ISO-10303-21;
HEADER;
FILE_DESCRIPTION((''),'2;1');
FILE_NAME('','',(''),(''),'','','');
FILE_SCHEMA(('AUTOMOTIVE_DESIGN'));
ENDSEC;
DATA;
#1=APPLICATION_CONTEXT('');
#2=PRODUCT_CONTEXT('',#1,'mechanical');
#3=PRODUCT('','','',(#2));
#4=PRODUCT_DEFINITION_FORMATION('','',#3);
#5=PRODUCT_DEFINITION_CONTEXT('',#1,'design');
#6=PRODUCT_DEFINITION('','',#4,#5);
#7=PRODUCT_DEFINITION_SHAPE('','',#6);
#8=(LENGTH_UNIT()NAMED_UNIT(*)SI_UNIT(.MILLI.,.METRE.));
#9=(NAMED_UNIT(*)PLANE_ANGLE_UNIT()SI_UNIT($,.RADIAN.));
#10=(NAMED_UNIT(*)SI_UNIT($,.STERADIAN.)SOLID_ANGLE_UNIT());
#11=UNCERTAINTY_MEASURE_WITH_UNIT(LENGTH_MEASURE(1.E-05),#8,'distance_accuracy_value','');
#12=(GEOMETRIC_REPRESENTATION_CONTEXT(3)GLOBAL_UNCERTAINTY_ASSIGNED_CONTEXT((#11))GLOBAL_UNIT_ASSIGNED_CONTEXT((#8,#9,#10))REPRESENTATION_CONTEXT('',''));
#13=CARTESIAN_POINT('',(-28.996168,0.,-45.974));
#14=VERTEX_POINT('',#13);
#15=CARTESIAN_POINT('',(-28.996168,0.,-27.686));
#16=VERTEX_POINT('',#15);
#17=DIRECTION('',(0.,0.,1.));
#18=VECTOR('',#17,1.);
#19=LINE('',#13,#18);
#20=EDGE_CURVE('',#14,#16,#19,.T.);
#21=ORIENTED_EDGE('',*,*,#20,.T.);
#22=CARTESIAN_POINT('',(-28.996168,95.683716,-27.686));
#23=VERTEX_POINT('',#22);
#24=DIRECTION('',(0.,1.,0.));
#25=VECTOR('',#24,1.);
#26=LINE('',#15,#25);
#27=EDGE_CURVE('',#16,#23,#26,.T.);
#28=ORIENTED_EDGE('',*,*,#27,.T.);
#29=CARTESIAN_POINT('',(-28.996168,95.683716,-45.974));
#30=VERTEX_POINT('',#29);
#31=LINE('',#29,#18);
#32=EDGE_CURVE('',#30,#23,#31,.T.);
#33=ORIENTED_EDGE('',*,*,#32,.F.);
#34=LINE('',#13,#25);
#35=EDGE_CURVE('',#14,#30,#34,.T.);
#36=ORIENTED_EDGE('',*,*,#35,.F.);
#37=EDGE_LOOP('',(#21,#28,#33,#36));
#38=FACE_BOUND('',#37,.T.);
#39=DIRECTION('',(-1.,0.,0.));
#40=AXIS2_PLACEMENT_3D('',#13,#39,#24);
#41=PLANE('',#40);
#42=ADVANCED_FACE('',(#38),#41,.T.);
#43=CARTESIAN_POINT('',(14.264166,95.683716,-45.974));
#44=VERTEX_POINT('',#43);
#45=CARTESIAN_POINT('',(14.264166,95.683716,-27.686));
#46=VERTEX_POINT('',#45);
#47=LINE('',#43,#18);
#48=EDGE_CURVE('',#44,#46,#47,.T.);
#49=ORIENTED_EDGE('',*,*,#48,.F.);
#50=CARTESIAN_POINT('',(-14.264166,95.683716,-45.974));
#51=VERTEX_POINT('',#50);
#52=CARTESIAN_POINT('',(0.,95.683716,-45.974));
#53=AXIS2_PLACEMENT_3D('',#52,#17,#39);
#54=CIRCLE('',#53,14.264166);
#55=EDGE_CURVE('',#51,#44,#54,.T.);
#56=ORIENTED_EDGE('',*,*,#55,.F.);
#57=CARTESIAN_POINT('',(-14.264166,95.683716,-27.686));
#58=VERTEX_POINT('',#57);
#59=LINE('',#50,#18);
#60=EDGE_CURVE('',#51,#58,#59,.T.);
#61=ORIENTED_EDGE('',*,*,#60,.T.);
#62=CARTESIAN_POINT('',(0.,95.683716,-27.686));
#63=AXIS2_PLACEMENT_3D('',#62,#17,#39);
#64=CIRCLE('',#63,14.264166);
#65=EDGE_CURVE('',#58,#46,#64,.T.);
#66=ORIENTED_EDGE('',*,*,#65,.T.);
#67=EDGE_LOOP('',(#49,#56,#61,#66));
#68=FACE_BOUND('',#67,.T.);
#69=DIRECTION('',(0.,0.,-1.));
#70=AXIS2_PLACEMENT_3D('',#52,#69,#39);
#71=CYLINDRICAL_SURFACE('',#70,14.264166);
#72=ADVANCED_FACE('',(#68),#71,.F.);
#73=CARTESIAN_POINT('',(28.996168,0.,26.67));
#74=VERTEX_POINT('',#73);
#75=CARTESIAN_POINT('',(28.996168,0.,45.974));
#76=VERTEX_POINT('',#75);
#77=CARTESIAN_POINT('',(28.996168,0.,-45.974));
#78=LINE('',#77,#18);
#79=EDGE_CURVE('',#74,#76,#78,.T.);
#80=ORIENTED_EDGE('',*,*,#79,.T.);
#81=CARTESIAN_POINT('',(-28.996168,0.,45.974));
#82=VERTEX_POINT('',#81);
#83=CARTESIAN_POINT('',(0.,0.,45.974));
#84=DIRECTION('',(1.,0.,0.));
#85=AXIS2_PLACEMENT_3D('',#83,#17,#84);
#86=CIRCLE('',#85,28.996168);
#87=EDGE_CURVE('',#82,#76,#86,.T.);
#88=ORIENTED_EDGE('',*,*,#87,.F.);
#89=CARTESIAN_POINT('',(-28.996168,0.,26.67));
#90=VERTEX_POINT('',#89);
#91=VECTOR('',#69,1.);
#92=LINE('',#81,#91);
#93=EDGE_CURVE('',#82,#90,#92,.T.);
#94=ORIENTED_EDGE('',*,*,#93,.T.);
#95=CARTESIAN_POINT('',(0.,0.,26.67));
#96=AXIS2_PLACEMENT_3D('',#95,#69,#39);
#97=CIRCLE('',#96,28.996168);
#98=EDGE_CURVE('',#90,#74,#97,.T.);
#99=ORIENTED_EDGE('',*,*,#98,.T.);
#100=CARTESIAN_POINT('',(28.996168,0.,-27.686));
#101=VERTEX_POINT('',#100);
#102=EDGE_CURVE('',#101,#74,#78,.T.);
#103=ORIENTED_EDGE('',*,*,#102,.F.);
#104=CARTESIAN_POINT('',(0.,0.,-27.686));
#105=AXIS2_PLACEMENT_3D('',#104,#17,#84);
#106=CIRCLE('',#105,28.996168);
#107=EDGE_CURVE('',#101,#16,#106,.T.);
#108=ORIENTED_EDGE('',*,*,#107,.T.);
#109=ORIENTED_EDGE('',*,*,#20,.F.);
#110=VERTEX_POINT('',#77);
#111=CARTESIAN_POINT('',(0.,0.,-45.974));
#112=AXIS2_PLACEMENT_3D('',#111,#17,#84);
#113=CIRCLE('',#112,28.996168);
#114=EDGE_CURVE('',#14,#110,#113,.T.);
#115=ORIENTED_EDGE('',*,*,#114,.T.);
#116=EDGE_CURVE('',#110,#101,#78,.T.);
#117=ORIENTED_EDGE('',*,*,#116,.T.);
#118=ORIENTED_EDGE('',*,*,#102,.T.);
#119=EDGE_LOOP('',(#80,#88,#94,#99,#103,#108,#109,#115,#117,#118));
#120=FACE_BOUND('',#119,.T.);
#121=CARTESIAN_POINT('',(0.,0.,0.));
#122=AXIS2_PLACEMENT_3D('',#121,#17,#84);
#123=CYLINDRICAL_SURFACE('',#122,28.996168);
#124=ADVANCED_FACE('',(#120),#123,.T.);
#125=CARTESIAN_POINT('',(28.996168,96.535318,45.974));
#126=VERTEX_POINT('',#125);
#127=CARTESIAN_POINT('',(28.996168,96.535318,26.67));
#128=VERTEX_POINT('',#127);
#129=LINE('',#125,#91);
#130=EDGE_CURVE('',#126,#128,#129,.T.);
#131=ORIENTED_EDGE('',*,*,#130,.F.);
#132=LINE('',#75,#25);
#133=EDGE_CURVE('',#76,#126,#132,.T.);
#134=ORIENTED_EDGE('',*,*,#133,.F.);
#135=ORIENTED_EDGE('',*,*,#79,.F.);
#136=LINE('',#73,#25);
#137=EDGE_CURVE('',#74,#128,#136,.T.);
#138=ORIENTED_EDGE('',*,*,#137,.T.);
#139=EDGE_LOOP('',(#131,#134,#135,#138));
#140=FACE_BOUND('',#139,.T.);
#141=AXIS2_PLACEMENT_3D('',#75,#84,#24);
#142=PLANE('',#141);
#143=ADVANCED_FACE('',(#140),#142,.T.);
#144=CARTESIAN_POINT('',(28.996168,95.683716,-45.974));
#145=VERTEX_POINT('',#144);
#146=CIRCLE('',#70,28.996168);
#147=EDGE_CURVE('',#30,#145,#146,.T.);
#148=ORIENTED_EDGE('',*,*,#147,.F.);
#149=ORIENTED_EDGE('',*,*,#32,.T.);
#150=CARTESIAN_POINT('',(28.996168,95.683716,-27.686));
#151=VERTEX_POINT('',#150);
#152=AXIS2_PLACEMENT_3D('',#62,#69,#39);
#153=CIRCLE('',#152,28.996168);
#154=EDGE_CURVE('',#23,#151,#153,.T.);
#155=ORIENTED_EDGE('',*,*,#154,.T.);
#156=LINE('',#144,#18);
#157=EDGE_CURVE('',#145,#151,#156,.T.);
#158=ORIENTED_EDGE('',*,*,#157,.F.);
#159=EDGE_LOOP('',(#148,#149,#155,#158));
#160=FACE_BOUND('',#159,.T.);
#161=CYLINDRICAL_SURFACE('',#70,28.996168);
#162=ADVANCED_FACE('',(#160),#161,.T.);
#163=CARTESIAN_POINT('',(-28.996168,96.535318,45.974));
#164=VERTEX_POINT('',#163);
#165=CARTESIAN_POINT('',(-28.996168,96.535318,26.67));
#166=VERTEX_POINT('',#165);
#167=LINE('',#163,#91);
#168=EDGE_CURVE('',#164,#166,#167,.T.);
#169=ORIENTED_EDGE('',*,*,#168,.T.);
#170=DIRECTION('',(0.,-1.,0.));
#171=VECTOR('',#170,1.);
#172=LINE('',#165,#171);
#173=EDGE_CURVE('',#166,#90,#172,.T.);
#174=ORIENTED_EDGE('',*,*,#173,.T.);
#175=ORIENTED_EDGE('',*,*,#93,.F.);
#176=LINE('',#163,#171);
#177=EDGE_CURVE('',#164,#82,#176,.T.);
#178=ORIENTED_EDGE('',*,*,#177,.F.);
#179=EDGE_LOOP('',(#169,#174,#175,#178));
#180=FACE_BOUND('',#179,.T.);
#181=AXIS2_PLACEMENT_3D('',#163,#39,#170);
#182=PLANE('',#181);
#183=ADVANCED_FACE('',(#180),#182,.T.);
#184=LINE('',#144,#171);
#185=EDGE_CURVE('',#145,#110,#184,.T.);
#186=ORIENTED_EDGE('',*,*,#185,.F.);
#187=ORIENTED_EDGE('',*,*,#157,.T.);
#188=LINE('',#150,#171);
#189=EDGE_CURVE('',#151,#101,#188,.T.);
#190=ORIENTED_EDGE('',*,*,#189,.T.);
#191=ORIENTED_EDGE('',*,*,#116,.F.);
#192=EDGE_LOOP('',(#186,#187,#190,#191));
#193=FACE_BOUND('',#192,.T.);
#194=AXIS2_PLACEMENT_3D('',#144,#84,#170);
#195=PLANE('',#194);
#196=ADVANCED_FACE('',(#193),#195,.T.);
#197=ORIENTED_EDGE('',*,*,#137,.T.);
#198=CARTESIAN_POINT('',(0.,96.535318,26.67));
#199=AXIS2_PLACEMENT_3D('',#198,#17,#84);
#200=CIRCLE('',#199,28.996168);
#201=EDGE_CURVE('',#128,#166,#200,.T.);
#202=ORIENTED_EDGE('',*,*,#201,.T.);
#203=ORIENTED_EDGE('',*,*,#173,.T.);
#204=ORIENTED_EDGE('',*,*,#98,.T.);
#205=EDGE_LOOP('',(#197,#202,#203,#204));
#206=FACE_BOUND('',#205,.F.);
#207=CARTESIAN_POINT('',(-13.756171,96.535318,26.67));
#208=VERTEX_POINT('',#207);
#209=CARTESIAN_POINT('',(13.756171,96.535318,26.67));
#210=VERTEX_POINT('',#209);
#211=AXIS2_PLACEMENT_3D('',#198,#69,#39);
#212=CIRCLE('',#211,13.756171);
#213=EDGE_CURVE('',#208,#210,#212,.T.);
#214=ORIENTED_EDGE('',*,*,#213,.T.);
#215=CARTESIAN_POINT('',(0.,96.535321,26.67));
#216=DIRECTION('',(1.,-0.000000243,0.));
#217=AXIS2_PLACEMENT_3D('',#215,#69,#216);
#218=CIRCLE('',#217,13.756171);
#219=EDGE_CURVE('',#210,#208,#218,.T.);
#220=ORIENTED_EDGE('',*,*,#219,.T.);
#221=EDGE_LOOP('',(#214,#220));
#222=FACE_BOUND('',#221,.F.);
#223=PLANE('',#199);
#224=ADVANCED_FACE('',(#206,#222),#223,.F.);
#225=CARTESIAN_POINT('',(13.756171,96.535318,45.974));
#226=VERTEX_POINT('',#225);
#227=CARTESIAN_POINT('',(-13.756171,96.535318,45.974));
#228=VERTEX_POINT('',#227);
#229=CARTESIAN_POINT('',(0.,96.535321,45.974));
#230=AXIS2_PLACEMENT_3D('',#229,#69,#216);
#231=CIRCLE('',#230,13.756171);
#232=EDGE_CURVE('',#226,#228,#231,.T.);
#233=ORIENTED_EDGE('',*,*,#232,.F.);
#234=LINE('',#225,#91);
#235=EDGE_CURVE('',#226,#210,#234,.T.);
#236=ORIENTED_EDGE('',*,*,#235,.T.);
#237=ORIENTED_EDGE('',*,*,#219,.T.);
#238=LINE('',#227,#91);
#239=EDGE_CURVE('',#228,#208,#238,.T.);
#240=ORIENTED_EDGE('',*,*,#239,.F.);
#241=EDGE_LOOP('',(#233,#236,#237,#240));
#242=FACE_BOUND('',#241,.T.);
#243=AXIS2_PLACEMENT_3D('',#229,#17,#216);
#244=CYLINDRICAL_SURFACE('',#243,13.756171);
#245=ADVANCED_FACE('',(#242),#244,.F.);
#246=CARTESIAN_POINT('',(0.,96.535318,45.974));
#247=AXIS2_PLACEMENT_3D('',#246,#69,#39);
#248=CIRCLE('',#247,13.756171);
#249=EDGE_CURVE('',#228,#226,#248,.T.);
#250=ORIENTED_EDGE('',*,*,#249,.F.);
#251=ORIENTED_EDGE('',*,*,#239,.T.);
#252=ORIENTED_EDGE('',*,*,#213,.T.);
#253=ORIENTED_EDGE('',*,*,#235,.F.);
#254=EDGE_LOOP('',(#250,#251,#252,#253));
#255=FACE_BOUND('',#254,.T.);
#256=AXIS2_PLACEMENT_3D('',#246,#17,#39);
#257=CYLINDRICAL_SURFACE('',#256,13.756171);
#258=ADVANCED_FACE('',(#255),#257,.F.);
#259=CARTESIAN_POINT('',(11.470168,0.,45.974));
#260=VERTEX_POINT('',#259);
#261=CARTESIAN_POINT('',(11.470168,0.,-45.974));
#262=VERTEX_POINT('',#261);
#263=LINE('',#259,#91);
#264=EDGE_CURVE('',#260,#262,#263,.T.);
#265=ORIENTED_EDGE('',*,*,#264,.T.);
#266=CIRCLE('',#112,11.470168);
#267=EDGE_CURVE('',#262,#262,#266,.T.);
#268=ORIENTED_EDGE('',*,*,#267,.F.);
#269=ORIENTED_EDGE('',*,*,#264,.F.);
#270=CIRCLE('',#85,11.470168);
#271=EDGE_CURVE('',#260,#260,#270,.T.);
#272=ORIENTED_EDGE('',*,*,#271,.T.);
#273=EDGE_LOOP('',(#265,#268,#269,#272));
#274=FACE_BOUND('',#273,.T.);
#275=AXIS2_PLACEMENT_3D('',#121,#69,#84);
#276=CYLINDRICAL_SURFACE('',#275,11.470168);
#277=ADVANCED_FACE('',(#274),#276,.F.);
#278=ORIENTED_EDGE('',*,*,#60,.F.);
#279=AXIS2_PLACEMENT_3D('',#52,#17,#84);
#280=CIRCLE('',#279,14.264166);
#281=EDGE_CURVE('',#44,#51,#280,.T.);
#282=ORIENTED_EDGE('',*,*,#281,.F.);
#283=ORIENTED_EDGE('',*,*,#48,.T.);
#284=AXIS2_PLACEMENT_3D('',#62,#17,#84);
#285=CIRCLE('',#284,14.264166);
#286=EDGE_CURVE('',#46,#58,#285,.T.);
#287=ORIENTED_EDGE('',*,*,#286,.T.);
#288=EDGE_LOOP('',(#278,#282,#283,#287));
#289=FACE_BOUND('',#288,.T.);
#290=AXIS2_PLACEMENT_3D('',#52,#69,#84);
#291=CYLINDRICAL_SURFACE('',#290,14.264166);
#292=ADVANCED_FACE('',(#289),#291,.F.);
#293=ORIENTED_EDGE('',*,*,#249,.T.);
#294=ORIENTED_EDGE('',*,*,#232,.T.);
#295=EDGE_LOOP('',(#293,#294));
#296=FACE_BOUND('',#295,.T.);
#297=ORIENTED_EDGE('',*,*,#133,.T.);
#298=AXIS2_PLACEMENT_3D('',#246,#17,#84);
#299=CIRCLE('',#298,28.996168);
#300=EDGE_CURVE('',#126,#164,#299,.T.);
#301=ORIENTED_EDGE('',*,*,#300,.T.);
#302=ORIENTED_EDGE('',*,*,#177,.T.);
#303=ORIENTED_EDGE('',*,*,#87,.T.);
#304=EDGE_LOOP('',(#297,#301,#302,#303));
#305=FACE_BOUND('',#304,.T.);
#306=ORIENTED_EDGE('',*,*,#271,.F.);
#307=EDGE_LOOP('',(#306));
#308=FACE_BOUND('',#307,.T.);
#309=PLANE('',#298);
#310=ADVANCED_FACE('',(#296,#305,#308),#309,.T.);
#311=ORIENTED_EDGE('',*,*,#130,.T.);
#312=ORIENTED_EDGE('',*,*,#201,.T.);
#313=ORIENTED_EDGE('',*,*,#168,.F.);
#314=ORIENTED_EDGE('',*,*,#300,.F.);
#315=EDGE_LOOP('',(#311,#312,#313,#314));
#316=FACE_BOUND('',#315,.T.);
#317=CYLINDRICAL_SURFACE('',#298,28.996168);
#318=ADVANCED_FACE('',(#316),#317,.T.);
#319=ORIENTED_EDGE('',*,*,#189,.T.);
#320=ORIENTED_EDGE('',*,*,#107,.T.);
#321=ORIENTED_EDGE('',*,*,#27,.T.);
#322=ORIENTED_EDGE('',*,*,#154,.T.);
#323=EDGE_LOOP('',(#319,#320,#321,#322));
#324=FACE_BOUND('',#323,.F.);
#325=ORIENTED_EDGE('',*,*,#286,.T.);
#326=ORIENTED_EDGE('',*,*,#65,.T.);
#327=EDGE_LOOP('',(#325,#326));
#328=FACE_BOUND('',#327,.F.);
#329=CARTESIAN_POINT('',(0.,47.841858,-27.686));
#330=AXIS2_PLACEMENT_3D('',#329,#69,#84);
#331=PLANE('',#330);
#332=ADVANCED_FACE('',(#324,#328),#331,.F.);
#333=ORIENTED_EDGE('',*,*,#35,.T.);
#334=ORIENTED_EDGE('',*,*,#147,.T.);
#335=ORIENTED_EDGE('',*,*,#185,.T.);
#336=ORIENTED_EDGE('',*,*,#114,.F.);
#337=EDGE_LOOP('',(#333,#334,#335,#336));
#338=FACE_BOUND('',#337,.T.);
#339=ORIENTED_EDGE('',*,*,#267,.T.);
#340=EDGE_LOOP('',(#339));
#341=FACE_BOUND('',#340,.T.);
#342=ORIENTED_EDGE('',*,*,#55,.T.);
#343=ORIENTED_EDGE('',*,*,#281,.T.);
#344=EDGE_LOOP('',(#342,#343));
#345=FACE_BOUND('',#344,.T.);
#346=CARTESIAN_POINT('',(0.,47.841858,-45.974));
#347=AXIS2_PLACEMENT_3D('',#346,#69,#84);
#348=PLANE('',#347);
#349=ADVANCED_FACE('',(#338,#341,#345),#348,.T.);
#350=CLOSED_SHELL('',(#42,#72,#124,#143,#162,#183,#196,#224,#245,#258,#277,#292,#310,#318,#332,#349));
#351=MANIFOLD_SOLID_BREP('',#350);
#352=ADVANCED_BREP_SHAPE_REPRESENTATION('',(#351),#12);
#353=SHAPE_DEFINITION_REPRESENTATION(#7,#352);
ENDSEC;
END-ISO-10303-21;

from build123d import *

# Parameters (mm, degrees)
F0_R     = 28.9961675247
F0_R_2   = 11.4701678976
F1_DEPTH = 45.974
F3_DEPTH = 19.304
F5_DEPTH = 18.288


# Not quite as in the source:
# - ends of sketch curves that miss each other by under 0.0002 mm in the source are joined


with BuildPart() as f1:
    # F0 (on Top) → F1 (new body, symmetric)
    with BuildSketch(Plane.XY):
        Circle(F0_R)
        Circle(F0_R_2, mode=Mode.SUBTRACT)
    extrude(amount=F1_DEPTH, both=True)

    # F2 (on face) → F3 (join)
    with BuildSketch(Plane.XY.offset(45.974)):
        with BuildLine():
            ThreePointArc((-28.9961675247, 96.5353175998), (0, 67.5391500751), (28.9961675247, 96.5353175998))
            ThreePointArc((28.9961675247, 96.5353175998), (0, 125.5314851244), (-28.9961675247, 96.5353175998))
        make_face()
        with BuildLine():
            ThreePointArc((-13.7561708689, 96.5353175998), (0, 110.2914884686), (13.7561708689, 96.5353175998))
            ThreePointArc((13.7561708689, 96.5353175998), (0, 82.7791500751), (-13.7561708689, 96.5353175998))
        make_face(mode=Mode.SUBTRACT)
        with BuildLine():
            Line((-28.9961675247, 96.5353175998), (-28.9961675247, 0))
            ThreePointArc((-28.9961675247, 0), (0, 28.9961675247), (28.9961675247, 0))
            Line((28.9961675247, 0), (28.9961675247, 96.5353175998))
            ThreePointArc((28.9961675247, 96.5353175998), (0, 67.5391500751), (-28.9961675247, 96.5353175998))
        make_face()
    extrude(amount=-F3_DEPTH)

    # F4 (on face) → F5 (join)
    with BuildSketch(Plane(origin=(0, 0, -45.974), x_dir=(1, 0, 0), z_dir=(0, 0, -1))):
        with BuildLine():
            Line((28.9961675247, -95.6837162375), (28.9961675247, 0))
            ThreePointArc((28.9961675247, 0), (0, -28.9961675247), (-28.9961675247, 0))
            Line((-28.9961675247, 0), (-28.9961675247, -95.6837162375))
            ThreePointArc((-28.9961675247, -95.6837162375), (0, -66.6875487129), (28.9961675247, -95.6837162375))
        make_face()
        with BuildLine():
            ThreePointArc((-28.9961675247, -95.6837162375), (0, -124.6798837622), (28.9961675247, -95.6837162375))
            ThreePointArc((28.9961675247, -95.6837162375), (0, -66.6875487129), (-28.9961675247, -95.6837162375))
        make_face()
        with BuildLine():
            ThreePointArc((14.2641663551, -95.6837162375), (0, -109.9478825927), (-14.2641663551, -95.6837162375))
            ThreePointArc((-14.2641663551, -95.6837162375), (0, -81.4195498824), (14.2641663551, -95.6837162375))
        make_face(mode=Mode.SUBTRACT)
    extrude(amount=-F5_DEPTH)


solid = f1.part
